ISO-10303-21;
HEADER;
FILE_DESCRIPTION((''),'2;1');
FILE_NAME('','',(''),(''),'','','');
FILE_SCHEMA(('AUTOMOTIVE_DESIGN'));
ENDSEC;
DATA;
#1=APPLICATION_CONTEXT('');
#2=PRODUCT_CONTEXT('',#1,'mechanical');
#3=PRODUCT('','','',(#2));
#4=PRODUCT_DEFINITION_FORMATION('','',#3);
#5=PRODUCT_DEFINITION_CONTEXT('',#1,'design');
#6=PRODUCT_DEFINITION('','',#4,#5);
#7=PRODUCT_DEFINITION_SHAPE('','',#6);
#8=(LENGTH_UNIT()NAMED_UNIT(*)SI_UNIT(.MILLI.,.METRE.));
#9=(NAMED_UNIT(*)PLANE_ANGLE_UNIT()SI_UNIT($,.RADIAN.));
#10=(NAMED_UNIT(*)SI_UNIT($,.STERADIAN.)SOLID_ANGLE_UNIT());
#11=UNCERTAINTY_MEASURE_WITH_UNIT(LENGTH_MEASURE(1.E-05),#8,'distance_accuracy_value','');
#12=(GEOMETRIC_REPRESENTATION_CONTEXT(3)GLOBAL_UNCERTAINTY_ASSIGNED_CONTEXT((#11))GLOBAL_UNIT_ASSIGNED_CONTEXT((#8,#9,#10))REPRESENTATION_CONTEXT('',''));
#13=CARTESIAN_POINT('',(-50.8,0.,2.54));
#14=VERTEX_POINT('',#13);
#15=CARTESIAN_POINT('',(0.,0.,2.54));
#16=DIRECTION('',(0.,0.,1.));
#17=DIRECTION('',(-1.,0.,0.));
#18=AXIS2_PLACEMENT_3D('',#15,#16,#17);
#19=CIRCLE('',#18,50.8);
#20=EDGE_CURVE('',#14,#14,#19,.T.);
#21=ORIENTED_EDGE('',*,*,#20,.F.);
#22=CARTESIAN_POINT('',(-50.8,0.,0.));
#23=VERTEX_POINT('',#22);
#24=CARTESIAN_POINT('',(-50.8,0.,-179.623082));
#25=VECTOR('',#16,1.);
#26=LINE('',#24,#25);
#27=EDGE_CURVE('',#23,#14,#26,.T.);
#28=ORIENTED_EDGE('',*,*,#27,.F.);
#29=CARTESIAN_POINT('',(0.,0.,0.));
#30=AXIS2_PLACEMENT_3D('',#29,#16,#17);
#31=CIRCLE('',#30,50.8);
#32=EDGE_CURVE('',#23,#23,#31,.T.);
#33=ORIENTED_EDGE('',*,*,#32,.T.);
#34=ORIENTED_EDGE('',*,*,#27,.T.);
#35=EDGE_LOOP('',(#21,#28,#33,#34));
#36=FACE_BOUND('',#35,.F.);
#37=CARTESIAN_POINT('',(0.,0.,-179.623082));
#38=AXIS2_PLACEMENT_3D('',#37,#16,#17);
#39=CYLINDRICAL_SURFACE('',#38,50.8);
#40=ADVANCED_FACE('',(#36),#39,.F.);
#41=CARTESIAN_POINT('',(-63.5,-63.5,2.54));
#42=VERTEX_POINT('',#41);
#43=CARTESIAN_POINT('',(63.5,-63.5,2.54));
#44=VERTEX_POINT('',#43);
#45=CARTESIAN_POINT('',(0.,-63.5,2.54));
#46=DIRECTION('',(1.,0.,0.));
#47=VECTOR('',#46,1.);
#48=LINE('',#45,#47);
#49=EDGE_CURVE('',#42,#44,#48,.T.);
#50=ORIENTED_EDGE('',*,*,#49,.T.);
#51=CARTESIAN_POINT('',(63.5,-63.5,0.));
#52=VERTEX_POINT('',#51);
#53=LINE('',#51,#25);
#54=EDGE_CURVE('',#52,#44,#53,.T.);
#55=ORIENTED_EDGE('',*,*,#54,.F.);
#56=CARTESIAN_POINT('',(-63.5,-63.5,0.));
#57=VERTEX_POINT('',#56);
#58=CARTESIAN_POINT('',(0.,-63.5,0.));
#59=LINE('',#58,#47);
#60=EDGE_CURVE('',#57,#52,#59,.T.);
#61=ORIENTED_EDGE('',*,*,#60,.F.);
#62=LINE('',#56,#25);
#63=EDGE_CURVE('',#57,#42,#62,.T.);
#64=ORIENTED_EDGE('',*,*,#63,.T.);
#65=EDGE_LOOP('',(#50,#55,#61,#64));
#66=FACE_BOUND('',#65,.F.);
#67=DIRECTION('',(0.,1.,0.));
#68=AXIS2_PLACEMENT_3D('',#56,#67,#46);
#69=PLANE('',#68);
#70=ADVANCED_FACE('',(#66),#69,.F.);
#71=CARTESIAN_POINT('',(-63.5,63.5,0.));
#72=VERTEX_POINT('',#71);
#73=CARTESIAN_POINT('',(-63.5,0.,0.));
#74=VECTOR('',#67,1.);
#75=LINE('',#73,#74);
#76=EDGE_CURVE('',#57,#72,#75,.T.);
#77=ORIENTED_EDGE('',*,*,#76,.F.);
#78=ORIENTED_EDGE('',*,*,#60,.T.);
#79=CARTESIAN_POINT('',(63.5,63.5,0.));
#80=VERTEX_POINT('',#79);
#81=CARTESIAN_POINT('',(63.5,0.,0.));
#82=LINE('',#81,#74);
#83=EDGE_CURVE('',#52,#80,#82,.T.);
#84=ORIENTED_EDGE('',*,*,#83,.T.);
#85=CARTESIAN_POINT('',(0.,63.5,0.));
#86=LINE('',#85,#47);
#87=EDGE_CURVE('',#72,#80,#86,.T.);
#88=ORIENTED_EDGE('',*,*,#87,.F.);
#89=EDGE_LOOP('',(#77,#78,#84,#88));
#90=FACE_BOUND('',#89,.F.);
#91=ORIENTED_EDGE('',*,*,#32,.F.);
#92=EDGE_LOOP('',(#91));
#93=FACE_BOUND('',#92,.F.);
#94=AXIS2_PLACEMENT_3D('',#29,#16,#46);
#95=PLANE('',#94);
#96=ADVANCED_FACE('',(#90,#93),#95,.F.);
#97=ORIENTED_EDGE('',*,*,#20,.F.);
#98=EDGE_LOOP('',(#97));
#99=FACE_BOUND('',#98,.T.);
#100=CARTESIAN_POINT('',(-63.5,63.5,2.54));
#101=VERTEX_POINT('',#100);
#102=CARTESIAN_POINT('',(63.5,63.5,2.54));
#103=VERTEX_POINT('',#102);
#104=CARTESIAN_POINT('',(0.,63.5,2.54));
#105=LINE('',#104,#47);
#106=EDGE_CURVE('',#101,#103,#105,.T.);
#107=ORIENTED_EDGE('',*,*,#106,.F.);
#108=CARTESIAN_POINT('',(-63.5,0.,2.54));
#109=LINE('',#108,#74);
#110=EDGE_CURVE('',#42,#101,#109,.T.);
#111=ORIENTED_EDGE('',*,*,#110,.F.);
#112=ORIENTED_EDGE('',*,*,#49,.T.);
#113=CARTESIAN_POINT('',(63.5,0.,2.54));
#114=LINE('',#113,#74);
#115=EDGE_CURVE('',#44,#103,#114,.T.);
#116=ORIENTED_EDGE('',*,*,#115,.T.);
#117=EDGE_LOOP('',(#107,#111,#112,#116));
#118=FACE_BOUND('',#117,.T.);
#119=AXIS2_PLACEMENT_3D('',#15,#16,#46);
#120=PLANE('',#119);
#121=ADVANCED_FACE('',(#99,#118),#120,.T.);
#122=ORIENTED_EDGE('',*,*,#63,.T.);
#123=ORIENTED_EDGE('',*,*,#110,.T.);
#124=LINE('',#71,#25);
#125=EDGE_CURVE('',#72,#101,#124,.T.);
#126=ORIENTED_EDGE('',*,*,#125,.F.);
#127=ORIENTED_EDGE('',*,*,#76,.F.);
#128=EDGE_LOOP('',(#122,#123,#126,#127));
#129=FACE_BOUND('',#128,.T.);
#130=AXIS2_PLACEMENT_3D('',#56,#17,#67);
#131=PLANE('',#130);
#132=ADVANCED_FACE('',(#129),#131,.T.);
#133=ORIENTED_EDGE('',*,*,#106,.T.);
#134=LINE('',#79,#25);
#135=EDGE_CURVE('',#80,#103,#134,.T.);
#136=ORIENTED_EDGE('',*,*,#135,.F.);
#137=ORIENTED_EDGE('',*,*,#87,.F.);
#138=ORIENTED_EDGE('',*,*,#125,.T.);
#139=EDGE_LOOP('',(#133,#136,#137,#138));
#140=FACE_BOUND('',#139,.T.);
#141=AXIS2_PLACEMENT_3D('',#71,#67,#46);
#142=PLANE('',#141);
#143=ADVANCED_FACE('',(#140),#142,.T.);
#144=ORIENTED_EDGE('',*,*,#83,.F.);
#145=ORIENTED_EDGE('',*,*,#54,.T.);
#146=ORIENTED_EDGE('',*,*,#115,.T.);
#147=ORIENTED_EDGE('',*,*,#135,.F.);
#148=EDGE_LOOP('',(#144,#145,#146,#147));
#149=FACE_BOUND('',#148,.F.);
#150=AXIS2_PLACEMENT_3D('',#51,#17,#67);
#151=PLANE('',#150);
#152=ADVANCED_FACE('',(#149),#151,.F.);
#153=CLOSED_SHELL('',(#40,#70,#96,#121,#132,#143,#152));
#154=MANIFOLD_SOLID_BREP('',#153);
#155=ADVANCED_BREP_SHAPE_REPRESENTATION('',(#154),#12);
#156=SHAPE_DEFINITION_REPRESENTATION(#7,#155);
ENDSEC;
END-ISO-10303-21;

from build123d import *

# Parameters (mm, degrees)
F0_W     = 127
F0_H     = 127
F1_DEPTH = 2.54
F4_D     = 101.6


# Not quite as in the source:
# - the program builds the solid bodies; features that only make, move or delete a surface that nothing else refers to are left out


with BuildPart() as f1:
    # F0 (on Top) → F1 (new body)
    with BuildSketch(Plane.XY):
        Rectangle(F0_W, F0_H)
    extrude(amount=F1_DEPTH)

    # F4 (through all)
    with Locations(Plane(origin=(0, 0, 0), x_dir=(1, 0, 0), z_dir=(0, 0, -1))):
        with Locations((0, 0)):
            Hole(F4_D / 2)


solid = f1.part
